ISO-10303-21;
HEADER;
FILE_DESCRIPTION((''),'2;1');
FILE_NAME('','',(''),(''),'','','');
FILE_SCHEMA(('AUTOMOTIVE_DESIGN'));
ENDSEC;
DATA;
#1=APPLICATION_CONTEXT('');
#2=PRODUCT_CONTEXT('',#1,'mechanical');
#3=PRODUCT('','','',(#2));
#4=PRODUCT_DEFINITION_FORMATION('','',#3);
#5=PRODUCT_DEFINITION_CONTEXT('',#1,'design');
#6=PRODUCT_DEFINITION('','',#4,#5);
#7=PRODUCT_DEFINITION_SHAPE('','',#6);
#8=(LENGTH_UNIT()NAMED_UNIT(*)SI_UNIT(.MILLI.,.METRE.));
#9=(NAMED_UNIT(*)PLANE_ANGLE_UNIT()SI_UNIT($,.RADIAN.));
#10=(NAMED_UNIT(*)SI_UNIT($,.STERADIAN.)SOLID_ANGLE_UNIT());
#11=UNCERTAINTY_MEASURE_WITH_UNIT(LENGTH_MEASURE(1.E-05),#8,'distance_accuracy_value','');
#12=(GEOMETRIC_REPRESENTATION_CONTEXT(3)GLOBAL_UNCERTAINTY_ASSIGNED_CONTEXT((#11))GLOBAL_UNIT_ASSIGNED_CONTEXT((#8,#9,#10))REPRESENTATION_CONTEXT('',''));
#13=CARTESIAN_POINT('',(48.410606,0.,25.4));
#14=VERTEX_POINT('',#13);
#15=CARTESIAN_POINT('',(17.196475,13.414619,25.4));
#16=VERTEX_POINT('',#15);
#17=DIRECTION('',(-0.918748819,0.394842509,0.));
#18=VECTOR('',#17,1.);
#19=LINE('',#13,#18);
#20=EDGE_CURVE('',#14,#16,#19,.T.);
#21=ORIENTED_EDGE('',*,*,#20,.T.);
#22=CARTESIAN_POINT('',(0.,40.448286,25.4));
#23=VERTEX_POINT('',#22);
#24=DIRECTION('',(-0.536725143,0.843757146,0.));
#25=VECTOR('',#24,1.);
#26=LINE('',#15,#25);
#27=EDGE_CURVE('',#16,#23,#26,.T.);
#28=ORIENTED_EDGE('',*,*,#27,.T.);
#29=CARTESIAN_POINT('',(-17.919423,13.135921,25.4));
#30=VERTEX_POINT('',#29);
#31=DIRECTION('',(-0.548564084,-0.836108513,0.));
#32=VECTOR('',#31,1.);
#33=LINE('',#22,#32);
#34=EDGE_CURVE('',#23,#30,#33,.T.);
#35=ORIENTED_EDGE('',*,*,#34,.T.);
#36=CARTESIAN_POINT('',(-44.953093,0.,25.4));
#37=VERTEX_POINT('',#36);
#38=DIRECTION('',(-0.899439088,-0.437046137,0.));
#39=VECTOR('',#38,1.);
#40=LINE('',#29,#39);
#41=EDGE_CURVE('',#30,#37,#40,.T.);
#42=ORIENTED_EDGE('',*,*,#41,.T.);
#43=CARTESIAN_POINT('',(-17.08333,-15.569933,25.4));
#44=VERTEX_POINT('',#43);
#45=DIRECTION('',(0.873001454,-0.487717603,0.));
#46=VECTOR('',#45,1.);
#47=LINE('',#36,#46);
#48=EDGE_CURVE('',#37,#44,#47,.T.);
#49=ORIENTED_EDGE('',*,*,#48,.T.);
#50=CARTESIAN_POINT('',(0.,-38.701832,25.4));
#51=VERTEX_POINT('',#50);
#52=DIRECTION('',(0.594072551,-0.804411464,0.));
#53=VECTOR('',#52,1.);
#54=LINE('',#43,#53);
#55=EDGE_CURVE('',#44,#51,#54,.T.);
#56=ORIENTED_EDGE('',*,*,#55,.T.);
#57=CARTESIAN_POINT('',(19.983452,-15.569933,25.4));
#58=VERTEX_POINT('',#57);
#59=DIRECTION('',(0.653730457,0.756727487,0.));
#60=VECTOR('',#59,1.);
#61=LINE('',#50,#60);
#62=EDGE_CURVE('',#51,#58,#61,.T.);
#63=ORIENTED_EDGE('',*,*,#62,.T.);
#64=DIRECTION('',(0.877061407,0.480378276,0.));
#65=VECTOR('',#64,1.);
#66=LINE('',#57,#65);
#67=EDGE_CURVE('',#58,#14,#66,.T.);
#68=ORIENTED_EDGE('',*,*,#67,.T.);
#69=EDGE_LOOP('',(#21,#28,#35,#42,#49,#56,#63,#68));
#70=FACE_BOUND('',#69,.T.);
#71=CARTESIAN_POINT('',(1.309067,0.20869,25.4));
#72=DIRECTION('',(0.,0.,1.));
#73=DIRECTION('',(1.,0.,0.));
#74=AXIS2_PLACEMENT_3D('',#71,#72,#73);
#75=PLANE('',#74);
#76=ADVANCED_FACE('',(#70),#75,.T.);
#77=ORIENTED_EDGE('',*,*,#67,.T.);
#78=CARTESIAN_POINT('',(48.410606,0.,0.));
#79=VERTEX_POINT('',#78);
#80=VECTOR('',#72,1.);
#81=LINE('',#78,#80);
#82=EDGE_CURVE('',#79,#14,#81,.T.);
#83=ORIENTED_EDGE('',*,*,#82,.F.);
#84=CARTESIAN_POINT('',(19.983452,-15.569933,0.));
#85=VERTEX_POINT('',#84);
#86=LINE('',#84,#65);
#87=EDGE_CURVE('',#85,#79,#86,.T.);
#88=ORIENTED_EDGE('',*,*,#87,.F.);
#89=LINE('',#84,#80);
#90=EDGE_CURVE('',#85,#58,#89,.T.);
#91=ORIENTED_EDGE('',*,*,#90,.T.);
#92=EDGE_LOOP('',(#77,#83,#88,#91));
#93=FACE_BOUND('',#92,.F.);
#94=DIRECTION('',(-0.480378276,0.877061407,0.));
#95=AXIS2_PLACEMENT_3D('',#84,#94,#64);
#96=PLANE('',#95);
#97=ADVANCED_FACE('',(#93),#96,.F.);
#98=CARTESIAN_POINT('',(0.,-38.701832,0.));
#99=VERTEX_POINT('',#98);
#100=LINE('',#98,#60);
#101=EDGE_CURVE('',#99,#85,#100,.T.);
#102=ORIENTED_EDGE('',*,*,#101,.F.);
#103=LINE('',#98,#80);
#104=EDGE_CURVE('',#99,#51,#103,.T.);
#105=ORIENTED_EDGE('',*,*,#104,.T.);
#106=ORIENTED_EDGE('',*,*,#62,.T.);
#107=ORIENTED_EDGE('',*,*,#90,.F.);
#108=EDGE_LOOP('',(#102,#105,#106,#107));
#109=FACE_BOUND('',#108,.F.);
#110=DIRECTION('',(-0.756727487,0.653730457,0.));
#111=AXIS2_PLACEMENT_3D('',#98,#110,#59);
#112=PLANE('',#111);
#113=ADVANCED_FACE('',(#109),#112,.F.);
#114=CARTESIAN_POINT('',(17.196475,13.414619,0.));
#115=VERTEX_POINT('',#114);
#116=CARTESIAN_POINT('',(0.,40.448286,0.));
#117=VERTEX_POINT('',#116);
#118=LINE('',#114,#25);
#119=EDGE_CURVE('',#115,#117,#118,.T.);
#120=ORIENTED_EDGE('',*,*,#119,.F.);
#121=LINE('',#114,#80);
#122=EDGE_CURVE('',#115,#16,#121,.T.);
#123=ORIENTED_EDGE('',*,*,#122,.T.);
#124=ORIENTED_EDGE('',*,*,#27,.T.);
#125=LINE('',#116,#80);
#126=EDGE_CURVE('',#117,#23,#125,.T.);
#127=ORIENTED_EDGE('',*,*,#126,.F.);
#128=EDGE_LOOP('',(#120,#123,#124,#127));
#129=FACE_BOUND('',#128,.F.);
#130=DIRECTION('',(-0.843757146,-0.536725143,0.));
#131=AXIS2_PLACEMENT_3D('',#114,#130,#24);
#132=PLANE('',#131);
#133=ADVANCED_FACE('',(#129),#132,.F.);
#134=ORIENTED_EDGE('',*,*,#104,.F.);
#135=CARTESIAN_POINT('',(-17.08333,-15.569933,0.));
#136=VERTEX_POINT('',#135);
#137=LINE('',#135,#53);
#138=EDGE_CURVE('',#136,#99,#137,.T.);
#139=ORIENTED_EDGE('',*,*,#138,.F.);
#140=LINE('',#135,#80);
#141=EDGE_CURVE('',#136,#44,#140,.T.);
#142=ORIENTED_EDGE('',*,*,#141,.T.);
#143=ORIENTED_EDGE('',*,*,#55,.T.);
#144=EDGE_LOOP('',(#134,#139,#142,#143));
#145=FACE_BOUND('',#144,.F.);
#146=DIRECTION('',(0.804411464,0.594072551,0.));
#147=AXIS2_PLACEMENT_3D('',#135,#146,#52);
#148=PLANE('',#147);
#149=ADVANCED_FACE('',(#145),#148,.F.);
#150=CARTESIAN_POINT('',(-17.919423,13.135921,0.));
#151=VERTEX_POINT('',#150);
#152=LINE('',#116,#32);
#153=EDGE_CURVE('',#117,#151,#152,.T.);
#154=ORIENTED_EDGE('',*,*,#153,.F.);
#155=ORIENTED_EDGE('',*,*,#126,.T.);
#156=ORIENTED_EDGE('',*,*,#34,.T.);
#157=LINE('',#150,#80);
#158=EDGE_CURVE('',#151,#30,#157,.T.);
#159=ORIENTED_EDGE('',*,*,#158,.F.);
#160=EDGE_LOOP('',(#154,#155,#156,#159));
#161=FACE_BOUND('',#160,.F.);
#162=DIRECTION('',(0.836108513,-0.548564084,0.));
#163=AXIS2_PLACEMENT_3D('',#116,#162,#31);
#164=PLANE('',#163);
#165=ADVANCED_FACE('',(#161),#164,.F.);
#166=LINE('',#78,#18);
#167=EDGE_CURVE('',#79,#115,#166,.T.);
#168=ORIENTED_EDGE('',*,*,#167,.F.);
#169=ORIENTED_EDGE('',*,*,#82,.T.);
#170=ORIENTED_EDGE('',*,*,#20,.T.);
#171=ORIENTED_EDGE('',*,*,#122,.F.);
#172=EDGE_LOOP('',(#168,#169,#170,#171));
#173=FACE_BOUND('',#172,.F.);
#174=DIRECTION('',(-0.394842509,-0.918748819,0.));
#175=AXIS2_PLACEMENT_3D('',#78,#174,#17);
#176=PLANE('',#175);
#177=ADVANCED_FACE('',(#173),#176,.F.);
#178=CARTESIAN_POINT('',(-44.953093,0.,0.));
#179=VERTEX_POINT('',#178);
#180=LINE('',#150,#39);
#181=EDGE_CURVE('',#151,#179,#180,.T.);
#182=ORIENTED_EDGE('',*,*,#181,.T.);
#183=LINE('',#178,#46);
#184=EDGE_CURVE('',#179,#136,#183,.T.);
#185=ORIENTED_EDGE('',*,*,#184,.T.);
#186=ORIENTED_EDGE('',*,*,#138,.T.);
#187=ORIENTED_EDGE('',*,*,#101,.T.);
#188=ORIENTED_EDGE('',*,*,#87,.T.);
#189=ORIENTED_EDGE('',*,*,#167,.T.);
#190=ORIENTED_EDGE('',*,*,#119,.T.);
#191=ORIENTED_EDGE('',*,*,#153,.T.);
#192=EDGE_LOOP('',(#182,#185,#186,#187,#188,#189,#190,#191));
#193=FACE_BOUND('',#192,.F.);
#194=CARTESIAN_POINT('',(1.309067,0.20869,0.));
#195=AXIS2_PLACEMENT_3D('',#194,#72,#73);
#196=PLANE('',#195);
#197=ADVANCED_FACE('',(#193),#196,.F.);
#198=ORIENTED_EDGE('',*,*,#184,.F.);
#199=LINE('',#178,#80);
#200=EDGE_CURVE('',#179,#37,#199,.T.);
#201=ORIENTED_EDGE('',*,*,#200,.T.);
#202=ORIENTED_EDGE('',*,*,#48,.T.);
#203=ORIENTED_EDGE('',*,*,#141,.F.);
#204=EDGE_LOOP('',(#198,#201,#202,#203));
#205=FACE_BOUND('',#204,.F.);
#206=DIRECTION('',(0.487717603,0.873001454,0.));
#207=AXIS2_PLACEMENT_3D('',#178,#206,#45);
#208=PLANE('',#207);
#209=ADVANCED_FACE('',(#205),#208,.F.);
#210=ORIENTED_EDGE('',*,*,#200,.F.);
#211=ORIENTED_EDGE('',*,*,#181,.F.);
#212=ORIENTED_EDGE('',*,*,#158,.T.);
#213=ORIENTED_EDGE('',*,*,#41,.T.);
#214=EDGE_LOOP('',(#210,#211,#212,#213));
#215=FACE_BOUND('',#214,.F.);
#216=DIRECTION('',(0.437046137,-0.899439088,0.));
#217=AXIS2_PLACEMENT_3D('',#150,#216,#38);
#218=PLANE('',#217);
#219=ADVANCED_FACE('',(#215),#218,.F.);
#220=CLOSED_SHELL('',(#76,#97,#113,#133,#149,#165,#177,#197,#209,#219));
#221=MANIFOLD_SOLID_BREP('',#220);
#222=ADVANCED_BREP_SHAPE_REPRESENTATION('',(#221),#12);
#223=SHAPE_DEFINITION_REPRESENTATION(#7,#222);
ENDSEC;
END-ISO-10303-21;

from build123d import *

# Parameters (mm, degrees)
F2_DEPTH = 25.4


# Not quite as in the source:
# - a feature of the source that left no trace in its solid (it failed there, or was rolled back) is left out


with BuildPart() as f2:
    # F1 (on face) → F2 (new body)
    with BuildSketch(Plane.XY):
        Polygon((0, 40.4482856393), (-17.9194230586, 13.1359212101), (-44.9530929327, 0), (-17.0833300799, -15.5699327588), (0, -38.7018322945), (19.9834518135, -15.5699327588), (48.4106056392, 0), (17.1964745969, 13.4146194905), align=None)
    extrude(amount=F2_DEPTH)


solid = f2.part
